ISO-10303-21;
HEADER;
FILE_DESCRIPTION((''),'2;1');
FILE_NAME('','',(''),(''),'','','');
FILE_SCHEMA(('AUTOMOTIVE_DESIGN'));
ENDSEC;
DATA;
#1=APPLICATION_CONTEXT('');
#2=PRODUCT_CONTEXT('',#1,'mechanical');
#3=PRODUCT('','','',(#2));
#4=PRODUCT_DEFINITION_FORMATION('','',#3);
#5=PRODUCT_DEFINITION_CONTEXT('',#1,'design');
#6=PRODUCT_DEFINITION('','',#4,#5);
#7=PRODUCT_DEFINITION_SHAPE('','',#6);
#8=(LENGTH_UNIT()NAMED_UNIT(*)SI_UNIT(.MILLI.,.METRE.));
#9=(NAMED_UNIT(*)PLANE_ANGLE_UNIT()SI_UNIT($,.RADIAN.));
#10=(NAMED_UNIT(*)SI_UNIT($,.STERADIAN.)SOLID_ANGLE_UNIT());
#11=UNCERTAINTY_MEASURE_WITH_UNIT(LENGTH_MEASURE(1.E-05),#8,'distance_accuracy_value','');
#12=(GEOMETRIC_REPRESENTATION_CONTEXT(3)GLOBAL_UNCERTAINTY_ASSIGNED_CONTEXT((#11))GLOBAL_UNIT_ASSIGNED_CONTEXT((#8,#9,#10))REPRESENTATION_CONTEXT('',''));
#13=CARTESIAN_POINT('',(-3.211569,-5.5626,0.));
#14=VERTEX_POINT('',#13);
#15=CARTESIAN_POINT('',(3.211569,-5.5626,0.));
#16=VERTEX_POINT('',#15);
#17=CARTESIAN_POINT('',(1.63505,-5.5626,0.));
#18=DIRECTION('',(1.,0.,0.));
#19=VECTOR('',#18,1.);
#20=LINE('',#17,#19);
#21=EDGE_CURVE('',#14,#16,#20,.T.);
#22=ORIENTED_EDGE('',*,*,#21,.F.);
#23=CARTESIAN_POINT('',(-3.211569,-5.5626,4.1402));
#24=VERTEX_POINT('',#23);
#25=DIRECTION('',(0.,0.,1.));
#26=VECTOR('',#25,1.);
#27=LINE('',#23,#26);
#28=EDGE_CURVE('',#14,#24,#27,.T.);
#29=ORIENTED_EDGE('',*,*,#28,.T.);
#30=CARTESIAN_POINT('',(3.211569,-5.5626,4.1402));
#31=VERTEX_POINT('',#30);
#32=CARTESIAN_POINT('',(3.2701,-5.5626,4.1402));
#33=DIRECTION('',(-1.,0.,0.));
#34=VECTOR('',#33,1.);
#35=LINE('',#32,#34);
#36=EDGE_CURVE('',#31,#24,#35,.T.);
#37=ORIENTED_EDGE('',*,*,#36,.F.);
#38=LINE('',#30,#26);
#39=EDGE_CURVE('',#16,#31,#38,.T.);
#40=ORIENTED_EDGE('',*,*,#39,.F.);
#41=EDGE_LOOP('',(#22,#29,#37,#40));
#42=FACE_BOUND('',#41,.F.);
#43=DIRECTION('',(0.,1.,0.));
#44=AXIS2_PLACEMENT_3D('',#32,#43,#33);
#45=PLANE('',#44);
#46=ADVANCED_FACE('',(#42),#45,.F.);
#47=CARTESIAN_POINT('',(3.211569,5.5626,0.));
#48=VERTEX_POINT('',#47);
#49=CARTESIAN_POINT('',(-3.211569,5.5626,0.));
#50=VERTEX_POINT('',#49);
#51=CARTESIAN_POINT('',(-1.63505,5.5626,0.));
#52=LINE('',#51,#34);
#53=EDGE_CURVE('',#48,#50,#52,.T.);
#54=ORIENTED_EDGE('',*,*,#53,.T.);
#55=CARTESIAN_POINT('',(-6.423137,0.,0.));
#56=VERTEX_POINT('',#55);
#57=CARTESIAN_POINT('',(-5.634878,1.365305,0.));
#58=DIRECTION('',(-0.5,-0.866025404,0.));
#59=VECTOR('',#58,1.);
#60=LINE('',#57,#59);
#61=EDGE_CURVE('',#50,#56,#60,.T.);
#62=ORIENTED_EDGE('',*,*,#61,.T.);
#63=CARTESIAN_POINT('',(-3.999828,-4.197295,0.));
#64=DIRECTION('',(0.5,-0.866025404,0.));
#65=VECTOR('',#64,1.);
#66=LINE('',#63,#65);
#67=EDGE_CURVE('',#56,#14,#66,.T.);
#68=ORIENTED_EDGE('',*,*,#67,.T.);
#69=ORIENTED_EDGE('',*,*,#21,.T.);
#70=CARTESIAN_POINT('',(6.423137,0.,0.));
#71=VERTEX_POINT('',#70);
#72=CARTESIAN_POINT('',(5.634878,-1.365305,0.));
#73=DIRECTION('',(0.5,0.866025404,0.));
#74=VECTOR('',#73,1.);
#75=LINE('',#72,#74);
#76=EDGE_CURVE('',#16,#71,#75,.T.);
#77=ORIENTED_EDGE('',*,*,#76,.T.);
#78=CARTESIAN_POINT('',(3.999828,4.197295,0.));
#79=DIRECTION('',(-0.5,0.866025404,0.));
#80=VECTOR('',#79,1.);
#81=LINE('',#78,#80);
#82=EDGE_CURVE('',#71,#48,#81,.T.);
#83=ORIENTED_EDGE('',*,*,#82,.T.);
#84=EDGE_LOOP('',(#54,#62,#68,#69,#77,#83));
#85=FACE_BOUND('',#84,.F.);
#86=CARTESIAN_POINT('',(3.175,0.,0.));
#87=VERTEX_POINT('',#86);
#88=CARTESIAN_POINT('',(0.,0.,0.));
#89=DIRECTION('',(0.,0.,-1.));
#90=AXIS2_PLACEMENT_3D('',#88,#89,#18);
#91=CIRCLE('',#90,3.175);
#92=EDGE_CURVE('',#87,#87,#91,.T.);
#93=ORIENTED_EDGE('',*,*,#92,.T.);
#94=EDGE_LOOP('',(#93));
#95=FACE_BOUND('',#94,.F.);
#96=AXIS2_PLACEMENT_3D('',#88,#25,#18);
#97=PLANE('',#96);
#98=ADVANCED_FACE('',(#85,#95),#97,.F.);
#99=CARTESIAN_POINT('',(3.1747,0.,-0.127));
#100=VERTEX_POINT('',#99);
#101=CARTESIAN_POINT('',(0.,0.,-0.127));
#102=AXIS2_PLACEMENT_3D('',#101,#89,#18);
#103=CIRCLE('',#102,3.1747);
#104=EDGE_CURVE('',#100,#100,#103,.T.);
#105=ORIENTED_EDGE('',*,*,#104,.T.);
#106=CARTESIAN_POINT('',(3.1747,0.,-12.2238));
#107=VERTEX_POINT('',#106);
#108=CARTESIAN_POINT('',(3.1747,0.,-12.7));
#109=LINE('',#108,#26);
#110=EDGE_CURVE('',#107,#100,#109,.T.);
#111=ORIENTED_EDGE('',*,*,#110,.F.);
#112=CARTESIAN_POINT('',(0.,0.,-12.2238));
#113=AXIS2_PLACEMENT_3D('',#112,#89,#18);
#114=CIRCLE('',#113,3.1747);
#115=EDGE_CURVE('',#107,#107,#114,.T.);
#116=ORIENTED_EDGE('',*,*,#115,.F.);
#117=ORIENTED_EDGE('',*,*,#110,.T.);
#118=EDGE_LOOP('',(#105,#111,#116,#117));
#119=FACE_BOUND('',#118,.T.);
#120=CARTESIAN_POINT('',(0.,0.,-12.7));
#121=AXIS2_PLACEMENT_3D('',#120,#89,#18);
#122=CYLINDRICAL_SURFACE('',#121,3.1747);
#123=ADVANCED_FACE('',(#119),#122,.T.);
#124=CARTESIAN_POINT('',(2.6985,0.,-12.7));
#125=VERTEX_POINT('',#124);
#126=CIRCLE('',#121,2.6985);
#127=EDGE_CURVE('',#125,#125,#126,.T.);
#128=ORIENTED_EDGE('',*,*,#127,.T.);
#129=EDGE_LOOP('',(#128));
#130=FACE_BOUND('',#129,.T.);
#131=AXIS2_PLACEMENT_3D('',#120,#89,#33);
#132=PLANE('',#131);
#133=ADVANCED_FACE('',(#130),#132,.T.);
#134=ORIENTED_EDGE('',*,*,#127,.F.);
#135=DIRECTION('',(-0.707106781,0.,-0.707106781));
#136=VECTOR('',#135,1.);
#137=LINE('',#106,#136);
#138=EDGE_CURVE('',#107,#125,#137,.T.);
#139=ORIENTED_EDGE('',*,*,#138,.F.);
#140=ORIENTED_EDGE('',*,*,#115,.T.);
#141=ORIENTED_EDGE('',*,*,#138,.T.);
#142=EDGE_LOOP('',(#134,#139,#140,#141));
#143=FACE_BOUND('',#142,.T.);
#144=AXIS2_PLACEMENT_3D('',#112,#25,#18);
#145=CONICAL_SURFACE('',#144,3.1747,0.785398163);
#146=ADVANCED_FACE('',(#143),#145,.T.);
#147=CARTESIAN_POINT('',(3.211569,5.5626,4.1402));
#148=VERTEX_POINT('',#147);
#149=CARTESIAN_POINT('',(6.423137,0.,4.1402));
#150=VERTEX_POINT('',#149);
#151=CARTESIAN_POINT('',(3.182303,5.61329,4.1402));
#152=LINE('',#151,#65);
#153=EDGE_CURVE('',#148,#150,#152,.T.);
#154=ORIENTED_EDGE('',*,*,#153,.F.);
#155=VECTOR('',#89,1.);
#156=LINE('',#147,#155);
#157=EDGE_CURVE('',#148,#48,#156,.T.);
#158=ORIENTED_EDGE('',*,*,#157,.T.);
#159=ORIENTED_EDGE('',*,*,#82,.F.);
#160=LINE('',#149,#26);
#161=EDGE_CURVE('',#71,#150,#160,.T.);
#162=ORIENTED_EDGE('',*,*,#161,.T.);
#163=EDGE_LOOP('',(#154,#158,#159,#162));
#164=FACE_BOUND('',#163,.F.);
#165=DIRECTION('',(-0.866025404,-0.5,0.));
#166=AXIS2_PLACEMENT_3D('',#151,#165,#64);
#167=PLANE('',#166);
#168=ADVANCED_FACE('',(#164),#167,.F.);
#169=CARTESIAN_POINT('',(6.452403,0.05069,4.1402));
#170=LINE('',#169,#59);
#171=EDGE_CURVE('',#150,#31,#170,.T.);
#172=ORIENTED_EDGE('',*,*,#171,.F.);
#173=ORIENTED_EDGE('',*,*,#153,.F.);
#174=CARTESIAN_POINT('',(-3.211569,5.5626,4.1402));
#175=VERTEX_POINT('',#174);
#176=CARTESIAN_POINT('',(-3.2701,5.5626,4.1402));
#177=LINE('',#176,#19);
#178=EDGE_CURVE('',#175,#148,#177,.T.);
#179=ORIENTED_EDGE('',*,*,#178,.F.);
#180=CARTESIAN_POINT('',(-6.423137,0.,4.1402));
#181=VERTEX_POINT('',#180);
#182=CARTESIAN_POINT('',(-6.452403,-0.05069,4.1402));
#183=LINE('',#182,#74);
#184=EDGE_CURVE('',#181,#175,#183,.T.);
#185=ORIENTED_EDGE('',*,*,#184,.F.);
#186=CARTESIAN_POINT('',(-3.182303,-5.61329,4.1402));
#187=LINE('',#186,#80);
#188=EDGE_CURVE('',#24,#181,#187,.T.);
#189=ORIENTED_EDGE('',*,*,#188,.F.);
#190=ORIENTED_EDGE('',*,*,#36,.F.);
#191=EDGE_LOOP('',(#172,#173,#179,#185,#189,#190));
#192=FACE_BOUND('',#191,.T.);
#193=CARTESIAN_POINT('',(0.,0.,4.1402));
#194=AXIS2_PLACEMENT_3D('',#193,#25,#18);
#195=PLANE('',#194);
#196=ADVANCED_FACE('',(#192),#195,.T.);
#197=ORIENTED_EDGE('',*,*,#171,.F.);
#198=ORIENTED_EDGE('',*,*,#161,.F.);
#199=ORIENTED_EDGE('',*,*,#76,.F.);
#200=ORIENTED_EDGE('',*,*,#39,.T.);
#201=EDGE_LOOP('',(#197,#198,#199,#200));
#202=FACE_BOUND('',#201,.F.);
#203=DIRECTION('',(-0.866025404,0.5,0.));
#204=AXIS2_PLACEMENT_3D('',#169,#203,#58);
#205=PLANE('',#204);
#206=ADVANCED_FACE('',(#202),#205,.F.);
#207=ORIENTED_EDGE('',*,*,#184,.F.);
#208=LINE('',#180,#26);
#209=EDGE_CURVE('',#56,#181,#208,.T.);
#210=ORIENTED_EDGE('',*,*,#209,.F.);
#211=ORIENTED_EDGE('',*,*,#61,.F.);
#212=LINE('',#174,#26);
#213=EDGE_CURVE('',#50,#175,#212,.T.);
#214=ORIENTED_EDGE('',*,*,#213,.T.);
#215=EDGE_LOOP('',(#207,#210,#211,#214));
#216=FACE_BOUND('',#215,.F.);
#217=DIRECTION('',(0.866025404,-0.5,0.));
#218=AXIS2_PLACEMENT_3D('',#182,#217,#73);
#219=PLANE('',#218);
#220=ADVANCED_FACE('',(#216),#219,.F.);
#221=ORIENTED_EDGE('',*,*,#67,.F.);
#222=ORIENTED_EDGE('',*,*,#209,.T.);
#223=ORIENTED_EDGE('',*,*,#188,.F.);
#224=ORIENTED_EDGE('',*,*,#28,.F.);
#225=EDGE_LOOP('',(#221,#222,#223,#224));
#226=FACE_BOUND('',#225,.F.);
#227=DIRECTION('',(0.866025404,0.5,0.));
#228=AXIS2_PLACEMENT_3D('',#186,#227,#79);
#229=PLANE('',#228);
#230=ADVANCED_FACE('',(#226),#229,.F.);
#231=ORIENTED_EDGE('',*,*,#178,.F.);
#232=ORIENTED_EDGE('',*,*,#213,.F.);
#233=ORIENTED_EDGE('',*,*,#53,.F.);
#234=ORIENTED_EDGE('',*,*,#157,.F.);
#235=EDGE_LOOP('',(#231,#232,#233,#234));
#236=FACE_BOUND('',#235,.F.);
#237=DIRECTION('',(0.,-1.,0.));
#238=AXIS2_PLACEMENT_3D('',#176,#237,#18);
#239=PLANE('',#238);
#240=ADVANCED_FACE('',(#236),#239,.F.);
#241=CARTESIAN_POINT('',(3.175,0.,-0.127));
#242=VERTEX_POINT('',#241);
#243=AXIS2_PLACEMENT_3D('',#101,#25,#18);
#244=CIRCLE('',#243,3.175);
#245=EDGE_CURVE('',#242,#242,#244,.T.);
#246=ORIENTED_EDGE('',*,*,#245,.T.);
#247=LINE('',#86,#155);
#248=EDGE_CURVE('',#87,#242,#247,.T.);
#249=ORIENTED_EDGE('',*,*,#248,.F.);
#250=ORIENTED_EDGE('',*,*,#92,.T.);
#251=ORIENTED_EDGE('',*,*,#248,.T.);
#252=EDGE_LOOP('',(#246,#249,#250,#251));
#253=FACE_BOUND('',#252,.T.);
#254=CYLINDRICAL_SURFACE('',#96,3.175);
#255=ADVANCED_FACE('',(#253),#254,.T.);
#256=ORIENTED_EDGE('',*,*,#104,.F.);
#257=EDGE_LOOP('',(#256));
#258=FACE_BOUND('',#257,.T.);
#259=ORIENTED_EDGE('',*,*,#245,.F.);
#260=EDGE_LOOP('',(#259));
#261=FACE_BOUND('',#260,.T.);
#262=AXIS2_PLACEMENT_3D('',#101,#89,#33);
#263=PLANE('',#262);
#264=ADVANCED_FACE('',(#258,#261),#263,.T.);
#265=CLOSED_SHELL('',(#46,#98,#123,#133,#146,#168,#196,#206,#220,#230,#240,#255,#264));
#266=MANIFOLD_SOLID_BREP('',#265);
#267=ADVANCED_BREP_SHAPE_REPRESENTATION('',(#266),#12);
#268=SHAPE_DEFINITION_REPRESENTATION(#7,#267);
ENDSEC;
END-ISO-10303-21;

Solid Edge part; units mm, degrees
sketch "Sketch1" plane through (0, 0, 0) normal (0, 0, 1) x (1, 0, 0)
  circle A0 centre (0, 0) radius 6.4526
  dimension "D1" = 12.9052
extrude "Protrusion1" add sketch "Sketch1" along normal blind 4.1402
sketch "Sketch2" plane through (0, 0, 0) normal (0, 0, -1) x (1, 0, 0)
  circle A0 centre (0, 0) radius 3.175
extrude "Protrusion2" add sketch "Sketch2" along normal blind 12.7
sketch "Sketch3" plane through (0, 0, -12.7) normal (0, 0, -1) x (1, 0, 0)
  circle A0 centre (0, 0) radius 3.1747
extrude "Cutout1" cut sketch "Sketch3" against normal blind 12.573 flip side to cut
chamfer "Chamfer_1" distance 0.4762 angle 45 1 edges at (-3.1747, 0, -12.7)
sketch "Sketch4" plane through (0, 0, 4.1402) normal (0, 0, 1) x (1, 0, 0)
  line L0 (-3.2701, 5.5626) -> (3.2701, 5.5626)
  dimension "D1" = 11.1252
extrude "Cutout2" cut sketch "Sketch4" against normal up to next material side at (0, 5.6126, 4.1402)
pattern_circular "Pattern1" count 6 over 360 about axis through (0, 0, 4.1402) along (0, 0, 1) of "Cutout2"
properties part number "24102667"
